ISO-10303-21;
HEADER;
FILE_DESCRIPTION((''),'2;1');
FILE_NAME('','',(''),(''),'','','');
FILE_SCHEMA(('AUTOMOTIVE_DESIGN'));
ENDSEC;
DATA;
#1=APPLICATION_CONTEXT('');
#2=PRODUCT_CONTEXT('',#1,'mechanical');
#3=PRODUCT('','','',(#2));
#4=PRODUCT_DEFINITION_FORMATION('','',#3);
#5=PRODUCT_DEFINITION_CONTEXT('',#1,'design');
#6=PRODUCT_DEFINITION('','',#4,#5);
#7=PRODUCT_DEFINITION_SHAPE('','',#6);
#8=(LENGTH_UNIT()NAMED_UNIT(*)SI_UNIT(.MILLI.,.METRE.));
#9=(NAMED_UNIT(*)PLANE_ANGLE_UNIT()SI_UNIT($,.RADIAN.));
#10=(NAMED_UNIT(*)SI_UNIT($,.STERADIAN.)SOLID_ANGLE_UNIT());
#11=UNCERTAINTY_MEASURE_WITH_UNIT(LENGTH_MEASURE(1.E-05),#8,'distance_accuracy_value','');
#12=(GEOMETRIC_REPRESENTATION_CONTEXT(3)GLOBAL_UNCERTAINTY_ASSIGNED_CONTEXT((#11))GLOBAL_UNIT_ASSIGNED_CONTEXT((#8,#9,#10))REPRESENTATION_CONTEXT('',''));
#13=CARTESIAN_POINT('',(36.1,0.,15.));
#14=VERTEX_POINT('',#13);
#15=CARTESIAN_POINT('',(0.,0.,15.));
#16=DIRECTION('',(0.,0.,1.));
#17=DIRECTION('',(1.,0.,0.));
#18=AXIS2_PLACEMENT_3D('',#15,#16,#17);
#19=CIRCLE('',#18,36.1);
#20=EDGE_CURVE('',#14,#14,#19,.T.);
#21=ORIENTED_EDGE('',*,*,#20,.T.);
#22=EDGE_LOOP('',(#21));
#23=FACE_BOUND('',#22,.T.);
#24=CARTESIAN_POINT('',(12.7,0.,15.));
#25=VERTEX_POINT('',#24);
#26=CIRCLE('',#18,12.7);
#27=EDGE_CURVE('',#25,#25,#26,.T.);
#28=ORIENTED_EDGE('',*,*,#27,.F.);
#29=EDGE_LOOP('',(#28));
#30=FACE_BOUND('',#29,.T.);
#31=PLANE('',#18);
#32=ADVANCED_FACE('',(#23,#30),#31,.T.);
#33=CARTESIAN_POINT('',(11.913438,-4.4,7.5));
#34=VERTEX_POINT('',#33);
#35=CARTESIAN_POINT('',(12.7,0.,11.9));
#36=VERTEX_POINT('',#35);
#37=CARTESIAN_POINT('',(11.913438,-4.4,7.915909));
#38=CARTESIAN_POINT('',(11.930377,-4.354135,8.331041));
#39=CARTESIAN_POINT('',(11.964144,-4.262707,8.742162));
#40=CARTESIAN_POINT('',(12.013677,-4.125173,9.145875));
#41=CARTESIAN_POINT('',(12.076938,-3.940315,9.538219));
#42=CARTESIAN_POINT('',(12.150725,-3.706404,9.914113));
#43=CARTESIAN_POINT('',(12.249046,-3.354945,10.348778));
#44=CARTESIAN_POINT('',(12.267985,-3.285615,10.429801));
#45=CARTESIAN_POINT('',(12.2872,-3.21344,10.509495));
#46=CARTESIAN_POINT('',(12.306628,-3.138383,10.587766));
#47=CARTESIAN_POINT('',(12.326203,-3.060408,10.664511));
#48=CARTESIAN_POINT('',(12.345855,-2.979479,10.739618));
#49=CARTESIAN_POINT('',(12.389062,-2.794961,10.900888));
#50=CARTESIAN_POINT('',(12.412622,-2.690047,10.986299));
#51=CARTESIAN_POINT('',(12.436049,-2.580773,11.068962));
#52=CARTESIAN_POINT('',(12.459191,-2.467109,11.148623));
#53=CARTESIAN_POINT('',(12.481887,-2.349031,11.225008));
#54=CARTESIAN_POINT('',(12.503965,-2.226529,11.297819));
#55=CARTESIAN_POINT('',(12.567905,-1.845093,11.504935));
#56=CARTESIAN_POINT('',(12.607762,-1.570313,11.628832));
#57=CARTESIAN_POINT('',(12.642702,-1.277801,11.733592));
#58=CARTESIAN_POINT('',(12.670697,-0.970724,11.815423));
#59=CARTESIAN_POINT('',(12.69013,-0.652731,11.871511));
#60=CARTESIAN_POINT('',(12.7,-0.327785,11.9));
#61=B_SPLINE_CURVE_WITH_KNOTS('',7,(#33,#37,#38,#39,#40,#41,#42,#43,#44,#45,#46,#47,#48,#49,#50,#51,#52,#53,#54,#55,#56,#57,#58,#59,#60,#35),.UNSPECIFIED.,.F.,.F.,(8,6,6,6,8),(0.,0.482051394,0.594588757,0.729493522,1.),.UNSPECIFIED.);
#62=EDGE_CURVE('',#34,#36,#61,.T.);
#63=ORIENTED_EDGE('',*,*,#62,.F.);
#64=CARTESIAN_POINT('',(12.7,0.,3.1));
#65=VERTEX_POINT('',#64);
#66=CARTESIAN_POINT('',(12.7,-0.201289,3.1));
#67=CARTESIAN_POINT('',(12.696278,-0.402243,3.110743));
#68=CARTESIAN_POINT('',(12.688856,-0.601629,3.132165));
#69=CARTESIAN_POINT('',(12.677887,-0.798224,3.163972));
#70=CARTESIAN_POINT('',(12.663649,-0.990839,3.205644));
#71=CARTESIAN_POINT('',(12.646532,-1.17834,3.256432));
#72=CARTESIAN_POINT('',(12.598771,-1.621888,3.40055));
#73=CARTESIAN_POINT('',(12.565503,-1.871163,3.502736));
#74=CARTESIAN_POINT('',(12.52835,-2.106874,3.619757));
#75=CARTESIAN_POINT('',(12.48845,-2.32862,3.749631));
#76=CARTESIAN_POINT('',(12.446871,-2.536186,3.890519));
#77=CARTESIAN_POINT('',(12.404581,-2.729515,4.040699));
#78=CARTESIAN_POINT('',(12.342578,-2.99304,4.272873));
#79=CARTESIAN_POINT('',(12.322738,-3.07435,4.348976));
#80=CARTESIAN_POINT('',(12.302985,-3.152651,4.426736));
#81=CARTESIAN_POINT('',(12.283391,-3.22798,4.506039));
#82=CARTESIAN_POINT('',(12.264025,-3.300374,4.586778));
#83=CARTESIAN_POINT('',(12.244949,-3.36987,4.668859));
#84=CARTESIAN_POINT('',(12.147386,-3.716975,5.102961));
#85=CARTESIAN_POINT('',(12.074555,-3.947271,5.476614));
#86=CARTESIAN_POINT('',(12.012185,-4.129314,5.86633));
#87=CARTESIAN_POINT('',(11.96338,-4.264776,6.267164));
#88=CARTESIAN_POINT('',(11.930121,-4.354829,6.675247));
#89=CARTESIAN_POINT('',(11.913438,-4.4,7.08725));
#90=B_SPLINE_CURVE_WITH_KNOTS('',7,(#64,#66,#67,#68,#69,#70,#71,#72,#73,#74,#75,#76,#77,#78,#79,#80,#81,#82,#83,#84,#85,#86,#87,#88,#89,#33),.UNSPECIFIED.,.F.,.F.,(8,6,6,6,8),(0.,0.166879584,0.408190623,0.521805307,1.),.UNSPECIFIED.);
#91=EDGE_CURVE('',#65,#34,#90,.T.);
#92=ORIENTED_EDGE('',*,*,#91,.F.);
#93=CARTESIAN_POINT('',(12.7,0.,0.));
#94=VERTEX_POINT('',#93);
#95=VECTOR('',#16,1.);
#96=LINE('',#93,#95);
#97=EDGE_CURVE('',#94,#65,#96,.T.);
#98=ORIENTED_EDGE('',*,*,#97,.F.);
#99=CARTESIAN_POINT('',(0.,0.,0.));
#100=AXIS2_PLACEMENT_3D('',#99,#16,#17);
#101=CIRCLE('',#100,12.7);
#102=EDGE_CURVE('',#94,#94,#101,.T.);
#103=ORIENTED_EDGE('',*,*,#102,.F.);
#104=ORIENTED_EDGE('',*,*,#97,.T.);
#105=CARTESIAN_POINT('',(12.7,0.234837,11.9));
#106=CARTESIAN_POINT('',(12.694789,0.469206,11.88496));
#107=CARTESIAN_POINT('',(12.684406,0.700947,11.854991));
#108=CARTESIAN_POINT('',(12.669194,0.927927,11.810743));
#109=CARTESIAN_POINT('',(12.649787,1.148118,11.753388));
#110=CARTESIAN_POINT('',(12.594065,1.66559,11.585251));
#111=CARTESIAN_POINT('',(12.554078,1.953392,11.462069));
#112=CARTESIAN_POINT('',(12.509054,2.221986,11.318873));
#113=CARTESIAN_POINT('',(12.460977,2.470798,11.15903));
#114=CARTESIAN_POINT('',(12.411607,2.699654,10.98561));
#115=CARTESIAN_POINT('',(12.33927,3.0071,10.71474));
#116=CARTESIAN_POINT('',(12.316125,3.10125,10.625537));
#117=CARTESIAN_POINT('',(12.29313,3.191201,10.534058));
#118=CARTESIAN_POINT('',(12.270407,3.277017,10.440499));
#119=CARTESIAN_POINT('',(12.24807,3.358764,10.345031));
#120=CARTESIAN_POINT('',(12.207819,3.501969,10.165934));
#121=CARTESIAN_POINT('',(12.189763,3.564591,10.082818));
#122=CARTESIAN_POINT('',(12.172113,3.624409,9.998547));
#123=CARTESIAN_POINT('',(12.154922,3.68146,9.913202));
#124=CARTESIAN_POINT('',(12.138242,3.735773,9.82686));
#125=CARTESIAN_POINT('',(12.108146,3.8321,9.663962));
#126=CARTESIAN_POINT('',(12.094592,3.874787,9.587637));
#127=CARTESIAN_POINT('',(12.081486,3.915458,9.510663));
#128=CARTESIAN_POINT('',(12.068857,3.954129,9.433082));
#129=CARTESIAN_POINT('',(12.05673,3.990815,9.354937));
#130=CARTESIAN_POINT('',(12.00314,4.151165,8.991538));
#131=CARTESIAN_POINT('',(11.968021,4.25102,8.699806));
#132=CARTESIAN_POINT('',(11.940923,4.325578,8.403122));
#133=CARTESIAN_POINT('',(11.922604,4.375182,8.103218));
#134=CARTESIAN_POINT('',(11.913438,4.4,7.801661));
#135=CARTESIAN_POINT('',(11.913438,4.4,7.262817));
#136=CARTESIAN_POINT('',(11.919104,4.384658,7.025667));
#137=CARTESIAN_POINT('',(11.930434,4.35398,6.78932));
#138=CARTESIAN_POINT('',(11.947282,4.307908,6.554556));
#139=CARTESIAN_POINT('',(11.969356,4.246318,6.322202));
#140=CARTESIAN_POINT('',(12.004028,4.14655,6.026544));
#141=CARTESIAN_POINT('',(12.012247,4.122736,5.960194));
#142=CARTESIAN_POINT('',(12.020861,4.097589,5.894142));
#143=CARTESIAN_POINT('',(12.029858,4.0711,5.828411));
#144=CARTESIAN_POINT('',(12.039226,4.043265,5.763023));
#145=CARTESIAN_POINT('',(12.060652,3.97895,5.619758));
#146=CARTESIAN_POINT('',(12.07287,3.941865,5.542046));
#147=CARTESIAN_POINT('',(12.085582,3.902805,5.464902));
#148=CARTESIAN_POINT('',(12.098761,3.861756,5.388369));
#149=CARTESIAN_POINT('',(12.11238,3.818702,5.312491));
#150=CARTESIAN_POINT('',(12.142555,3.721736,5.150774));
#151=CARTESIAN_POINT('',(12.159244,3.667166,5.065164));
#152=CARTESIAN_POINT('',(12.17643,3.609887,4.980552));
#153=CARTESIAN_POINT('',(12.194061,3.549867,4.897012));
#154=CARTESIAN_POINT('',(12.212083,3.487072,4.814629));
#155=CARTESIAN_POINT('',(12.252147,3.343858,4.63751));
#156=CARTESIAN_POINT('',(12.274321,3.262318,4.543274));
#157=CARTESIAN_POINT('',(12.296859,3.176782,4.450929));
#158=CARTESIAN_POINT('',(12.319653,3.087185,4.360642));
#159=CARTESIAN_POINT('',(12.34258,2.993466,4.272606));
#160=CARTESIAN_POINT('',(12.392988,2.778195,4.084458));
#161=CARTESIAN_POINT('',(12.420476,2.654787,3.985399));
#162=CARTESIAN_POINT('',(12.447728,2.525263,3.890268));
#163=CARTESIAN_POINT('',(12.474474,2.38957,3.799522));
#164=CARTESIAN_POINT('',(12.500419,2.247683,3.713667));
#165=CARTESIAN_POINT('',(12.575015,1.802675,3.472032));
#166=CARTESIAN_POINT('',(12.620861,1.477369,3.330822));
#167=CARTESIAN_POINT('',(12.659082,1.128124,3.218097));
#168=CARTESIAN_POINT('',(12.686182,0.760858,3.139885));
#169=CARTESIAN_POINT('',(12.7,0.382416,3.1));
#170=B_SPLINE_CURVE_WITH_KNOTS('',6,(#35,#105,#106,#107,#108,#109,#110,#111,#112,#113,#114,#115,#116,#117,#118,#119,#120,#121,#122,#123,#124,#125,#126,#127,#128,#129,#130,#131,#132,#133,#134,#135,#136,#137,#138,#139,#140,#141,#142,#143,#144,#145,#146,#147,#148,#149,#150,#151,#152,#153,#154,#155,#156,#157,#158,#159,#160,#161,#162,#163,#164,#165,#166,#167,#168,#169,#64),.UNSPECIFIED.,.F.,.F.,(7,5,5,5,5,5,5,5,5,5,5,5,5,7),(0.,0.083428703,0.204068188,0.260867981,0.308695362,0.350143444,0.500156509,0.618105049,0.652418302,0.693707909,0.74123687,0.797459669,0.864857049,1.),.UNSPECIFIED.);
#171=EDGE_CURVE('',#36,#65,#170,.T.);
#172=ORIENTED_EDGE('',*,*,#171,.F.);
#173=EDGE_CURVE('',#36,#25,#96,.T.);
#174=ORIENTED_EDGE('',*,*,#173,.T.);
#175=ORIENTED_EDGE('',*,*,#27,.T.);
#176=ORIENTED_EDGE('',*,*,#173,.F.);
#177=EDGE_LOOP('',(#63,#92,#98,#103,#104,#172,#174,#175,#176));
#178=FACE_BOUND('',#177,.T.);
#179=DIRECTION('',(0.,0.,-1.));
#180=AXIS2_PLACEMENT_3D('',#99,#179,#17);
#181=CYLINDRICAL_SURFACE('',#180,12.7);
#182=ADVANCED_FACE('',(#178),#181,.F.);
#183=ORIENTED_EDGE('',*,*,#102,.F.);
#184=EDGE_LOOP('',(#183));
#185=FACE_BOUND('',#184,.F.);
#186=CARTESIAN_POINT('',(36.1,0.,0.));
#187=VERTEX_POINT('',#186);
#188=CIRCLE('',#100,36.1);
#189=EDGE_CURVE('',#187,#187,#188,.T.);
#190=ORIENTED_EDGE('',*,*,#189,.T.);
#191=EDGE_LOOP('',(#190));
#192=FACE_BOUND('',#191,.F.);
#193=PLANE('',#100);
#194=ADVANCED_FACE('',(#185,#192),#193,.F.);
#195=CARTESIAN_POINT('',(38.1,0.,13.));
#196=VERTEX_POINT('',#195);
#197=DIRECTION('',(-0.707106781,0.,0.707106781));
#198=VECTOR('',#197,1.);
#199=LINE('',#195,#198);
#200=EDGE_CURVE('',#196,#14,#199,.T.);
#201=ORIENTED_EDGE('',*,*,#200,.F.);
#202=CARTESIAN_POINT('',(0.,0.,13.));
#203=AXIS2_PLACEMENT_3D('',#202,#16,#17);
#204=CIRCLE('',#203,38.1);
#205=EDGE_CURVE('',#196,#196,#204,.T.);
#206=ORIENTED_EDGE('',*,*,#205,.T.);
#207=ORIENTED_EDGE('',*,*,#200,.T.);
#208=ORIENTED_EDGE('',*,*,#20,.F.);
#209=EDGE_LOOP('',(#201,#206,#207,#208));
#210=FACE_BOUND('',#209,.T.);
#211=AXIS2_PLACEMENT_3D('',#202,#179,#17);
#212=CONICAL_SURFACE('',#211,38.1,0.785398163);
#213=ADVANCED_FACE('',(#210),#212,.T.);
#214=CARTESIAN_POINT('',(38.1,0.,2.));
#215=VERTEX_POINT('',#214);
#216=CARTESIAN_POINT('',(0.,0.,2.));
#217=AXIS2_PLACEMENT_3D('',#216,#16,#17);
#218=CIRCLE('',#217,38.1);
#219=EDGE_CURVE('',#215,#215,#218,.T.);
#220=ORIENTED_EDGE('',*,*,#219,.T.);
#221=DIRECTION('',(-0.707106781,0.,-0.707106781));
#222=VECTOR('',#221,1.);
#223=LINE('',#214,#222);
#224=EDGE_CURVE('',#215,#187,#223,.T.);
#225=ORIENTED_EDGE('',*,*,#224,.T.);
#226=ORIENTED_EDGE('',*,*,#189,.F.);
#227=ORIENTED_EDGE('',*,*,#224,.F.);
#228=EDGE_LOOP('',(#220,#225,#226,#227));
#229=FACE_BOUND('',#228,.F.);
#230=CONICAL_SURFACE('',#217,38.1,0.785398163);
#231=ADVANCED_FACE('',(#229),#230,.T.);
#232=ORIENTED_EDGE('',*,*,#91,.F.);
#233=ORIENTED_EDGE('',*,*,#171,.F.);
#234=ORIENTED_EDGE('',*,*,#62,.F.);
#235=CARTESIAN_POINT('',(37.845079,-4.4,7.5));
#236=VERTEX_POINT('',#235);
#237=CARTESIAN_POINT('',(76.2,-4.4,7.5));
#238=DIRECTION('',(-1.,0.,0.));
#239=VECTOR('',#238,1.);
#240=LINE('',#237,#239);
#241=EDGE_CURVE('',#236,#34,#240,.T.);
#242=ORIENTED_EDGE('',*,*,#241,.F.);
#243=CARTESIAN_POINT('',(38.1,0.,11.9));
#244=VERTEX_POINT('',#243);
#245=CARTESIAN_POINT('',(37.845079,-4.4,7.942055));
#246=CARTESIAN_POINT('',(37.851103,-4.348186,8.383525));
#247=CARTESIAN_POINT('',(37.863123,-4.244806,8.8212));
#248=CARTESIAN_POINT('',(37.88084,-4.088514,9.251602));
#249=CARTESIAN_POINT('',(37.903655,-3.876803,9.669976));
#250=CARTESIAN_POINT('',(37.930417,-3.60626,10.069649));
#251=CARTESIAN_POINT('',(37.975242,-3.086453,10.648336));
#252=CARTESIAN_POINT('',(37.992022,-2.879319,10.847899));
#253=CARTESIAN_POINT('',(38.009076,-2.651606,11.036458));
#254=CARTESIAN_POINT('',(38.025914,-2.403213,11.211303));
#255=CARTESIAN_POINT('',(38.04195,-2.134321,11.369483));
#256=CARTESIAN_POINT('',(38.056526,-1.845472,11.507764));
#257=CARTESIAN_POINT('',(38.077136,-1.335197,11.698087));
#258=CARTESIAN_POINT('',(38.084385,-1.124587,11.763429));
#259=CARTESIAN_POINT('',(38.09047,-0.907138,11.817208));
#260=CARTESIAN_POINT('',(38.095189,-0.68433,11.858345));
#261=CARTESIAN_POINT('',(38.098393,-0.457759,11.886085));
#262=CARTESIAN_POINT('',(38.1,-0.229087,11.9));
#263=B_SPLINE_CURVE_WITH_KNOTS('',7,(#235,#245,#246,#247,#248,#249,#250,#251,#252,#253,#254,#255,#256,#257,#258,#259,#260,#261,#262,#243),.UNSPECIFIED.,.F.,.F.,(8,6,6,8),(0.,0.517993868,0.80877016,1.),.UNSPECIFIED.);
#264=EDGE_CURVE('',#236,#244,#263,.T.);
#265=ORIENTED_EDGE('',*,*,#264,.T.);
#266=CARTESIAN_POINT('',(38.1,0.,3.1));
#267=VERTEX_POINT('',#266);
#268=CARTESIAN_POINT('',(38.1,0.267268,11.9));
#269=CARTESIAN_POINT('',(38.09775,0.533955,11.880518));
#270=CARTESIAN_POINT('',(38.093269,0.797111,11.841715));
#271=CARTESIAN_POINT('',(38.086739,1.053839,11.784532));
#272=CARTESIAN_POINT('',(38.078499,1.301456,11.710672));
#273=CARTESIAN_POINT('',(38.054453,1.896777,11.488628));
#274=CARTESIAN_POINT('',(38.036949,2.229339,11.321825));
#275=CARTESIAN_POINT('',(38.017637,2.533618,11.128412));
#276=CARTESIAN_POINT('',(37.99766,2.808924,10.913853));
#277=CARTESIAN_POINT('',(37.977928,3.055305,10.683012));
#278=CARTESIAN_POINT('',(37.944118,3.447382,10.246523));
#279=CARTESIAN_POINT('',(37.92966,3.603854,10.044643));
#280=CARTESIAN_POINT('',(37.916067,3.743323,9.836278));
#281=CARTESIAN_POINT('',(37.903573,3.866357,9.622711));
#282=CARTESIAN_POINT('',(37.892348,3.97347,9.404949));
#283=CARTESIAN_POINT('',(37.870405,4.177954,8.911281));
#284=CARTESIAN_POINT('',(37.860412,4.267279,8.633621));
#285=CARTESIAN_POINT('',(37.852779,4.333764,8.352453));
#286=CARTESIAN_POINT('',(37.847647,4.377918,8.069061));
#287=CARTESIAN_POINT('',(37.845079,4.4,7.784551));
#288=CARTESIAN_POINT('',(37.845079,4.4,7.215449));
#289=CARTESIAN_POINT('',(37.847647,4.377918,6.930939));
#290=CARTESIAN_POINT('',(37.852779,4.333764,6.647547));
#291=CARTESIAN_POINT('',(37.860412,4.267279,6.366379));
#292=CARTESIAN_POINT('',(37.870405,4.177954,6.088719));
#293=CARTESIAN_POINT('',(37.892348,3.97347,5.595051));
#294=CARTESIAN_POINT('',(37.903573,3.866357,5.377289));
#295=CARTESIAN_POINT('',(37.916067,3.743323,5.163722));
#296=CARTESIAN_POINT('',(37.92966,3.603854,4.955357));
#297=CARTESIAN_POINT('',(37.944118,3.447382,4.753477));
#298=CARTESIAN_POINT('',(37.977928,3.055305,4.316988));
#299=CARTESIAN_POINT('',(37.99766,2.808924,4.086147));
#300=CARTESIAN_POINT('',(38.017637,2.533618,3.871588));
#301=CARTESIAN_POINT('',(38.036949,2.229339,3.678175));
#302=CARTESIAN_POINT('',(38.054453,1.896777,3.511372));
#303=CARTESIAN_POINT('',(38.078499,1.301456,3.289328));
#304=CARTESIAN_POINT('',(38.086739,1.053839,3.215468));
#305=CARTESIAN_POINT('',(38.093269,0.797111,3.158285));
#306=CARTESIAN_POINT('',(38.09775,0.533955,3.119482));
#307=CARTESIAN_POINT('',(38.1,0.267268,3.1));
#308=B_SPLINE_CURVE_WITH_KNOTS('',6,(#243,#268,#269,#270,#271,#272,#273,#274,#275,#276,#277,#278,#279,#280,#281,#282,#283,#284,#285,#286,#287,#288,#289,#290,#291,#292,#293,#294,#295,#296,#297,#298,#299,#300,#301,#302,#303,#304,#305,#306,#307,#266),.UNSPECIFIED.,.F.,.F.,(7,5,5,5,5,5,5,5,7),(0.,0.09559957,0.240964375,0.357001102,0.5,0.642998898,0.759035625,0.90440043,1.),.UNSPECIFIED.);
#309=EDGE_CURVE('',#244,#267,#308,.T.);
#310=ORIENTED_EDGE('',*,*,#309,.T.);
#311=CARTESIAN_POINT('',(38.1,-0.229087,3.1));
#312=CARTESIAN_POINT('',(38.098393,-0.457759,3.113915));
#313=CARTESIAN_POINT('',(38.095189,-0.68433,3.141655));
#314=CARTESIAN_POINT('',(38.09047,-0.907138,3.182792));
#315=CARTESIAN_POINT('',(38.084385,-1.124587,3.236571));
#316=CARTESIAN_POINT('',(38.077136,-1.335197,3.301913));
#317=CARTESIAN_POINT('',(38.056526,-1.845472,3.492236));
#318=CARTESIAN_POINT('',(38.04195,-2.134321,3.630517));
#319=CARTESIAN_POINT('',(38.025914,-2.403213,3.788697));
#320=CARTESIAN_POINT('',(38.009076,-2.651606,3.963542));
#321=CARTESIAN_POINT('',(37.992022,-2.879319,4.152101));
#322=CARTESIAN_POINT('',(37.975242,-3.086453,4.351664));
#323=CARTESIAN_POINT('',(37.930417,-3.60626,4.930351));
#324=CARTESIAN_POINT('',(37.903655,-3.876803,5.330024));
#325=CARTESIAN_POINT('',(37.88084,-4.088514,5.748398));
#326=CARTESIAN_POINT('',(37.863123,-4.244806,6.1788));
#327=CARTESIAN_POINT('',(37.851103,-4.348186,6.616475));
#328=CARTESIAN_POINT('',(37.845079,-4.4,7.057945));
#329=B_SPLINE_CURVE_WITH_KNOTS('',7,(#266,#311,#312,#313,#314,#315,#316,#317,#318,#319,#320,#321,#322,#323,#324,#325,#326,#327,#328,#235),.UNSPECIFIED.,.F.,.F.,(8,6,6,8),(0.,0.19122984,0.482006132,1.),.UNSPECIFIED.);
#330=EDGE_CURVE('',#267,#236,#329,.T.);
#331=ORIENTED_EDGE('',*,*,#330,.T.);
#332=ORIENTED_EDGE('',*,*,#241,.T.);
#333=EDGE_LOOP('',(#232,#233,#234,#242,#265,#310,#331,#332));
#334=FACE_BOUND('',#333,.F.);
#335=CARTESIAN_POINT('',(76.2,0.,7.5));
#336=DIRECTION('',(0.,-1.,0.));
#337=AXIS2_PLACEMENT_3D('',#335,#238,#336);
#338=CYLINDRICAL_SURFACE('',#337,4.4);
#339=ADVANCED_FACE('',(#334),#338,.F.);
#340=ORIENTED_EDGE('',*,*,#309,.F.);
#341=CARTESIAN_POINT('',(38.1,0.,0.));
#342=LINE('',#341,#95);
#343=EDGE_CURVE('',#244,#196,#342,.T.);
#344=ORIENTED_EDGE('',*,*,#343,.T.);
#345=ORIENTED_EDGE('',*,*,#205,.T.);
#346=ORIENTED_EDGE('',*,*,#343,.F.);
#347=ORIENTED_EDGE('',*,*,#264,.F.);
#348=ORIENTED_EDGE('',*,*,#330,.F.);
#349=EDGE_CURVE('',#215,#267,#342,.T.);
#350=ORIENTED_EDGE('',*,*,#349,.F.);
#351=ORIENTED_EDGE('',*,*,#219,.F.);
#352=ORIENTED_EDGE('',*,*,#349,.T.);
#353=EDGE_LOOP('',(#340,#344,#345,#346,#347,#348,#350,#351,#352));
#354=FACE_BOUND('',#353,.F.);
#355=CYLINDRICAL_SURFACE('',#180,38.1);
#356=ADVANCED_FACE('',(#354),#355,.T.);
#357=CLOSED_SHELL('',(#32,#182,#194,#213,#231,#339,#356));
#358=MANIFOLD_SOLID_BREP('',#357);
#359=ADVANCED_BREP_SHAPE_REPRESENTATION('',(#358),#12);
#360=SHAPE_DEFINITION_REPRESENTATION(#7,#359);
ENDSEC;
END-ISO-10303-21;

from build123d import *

# Parameters (mm, degrees)
F0_R     = 38.1
F0_R_2   = 12.7
F1_DEPTH = 15
F2_SIZE  = 2
F5_D     = 8.8
F5_DEPTH = 38.1
F5_TIP   = 2.6437867237


# Not quite as in the source:
# - a length typed as a fraction of an inch, garbled in the dataset ("3 / 203.2 mm" for 3/8 in), is restored


with BuildPart() as f1:
    # F0 (on Top) → F1 (new body)
    with BuildSketch(Plane.XY):
        Circle(F0_R)
        Circle(F0_R_2, mode=Mode.SUBTRACT)
    extrude(amount=F1_DEPTH)

    # F2
    f2_edges = [f1.edges().sort_by_distance(p)[0] for p in [
        (-38.1, 0, 15),
        (-38.1, 0, 0),
    ]]
    chamfer(f2_edges, length=F2_SIZE)

    # F5
    with Locations(Plane.YZ.offset(38.1)):
        with Locations((0, 7.5)):
            Hole(F5_D / 2, depth=F5_DEPTH)
            with Locations((0, 0, -(F5_DEPTH + F5_TIP / 2))):  # 118° drill point
                Cone(0, F5_D / 2, F5_TIP, mode=Mode.SUBTRACT)


solid = f1.part
